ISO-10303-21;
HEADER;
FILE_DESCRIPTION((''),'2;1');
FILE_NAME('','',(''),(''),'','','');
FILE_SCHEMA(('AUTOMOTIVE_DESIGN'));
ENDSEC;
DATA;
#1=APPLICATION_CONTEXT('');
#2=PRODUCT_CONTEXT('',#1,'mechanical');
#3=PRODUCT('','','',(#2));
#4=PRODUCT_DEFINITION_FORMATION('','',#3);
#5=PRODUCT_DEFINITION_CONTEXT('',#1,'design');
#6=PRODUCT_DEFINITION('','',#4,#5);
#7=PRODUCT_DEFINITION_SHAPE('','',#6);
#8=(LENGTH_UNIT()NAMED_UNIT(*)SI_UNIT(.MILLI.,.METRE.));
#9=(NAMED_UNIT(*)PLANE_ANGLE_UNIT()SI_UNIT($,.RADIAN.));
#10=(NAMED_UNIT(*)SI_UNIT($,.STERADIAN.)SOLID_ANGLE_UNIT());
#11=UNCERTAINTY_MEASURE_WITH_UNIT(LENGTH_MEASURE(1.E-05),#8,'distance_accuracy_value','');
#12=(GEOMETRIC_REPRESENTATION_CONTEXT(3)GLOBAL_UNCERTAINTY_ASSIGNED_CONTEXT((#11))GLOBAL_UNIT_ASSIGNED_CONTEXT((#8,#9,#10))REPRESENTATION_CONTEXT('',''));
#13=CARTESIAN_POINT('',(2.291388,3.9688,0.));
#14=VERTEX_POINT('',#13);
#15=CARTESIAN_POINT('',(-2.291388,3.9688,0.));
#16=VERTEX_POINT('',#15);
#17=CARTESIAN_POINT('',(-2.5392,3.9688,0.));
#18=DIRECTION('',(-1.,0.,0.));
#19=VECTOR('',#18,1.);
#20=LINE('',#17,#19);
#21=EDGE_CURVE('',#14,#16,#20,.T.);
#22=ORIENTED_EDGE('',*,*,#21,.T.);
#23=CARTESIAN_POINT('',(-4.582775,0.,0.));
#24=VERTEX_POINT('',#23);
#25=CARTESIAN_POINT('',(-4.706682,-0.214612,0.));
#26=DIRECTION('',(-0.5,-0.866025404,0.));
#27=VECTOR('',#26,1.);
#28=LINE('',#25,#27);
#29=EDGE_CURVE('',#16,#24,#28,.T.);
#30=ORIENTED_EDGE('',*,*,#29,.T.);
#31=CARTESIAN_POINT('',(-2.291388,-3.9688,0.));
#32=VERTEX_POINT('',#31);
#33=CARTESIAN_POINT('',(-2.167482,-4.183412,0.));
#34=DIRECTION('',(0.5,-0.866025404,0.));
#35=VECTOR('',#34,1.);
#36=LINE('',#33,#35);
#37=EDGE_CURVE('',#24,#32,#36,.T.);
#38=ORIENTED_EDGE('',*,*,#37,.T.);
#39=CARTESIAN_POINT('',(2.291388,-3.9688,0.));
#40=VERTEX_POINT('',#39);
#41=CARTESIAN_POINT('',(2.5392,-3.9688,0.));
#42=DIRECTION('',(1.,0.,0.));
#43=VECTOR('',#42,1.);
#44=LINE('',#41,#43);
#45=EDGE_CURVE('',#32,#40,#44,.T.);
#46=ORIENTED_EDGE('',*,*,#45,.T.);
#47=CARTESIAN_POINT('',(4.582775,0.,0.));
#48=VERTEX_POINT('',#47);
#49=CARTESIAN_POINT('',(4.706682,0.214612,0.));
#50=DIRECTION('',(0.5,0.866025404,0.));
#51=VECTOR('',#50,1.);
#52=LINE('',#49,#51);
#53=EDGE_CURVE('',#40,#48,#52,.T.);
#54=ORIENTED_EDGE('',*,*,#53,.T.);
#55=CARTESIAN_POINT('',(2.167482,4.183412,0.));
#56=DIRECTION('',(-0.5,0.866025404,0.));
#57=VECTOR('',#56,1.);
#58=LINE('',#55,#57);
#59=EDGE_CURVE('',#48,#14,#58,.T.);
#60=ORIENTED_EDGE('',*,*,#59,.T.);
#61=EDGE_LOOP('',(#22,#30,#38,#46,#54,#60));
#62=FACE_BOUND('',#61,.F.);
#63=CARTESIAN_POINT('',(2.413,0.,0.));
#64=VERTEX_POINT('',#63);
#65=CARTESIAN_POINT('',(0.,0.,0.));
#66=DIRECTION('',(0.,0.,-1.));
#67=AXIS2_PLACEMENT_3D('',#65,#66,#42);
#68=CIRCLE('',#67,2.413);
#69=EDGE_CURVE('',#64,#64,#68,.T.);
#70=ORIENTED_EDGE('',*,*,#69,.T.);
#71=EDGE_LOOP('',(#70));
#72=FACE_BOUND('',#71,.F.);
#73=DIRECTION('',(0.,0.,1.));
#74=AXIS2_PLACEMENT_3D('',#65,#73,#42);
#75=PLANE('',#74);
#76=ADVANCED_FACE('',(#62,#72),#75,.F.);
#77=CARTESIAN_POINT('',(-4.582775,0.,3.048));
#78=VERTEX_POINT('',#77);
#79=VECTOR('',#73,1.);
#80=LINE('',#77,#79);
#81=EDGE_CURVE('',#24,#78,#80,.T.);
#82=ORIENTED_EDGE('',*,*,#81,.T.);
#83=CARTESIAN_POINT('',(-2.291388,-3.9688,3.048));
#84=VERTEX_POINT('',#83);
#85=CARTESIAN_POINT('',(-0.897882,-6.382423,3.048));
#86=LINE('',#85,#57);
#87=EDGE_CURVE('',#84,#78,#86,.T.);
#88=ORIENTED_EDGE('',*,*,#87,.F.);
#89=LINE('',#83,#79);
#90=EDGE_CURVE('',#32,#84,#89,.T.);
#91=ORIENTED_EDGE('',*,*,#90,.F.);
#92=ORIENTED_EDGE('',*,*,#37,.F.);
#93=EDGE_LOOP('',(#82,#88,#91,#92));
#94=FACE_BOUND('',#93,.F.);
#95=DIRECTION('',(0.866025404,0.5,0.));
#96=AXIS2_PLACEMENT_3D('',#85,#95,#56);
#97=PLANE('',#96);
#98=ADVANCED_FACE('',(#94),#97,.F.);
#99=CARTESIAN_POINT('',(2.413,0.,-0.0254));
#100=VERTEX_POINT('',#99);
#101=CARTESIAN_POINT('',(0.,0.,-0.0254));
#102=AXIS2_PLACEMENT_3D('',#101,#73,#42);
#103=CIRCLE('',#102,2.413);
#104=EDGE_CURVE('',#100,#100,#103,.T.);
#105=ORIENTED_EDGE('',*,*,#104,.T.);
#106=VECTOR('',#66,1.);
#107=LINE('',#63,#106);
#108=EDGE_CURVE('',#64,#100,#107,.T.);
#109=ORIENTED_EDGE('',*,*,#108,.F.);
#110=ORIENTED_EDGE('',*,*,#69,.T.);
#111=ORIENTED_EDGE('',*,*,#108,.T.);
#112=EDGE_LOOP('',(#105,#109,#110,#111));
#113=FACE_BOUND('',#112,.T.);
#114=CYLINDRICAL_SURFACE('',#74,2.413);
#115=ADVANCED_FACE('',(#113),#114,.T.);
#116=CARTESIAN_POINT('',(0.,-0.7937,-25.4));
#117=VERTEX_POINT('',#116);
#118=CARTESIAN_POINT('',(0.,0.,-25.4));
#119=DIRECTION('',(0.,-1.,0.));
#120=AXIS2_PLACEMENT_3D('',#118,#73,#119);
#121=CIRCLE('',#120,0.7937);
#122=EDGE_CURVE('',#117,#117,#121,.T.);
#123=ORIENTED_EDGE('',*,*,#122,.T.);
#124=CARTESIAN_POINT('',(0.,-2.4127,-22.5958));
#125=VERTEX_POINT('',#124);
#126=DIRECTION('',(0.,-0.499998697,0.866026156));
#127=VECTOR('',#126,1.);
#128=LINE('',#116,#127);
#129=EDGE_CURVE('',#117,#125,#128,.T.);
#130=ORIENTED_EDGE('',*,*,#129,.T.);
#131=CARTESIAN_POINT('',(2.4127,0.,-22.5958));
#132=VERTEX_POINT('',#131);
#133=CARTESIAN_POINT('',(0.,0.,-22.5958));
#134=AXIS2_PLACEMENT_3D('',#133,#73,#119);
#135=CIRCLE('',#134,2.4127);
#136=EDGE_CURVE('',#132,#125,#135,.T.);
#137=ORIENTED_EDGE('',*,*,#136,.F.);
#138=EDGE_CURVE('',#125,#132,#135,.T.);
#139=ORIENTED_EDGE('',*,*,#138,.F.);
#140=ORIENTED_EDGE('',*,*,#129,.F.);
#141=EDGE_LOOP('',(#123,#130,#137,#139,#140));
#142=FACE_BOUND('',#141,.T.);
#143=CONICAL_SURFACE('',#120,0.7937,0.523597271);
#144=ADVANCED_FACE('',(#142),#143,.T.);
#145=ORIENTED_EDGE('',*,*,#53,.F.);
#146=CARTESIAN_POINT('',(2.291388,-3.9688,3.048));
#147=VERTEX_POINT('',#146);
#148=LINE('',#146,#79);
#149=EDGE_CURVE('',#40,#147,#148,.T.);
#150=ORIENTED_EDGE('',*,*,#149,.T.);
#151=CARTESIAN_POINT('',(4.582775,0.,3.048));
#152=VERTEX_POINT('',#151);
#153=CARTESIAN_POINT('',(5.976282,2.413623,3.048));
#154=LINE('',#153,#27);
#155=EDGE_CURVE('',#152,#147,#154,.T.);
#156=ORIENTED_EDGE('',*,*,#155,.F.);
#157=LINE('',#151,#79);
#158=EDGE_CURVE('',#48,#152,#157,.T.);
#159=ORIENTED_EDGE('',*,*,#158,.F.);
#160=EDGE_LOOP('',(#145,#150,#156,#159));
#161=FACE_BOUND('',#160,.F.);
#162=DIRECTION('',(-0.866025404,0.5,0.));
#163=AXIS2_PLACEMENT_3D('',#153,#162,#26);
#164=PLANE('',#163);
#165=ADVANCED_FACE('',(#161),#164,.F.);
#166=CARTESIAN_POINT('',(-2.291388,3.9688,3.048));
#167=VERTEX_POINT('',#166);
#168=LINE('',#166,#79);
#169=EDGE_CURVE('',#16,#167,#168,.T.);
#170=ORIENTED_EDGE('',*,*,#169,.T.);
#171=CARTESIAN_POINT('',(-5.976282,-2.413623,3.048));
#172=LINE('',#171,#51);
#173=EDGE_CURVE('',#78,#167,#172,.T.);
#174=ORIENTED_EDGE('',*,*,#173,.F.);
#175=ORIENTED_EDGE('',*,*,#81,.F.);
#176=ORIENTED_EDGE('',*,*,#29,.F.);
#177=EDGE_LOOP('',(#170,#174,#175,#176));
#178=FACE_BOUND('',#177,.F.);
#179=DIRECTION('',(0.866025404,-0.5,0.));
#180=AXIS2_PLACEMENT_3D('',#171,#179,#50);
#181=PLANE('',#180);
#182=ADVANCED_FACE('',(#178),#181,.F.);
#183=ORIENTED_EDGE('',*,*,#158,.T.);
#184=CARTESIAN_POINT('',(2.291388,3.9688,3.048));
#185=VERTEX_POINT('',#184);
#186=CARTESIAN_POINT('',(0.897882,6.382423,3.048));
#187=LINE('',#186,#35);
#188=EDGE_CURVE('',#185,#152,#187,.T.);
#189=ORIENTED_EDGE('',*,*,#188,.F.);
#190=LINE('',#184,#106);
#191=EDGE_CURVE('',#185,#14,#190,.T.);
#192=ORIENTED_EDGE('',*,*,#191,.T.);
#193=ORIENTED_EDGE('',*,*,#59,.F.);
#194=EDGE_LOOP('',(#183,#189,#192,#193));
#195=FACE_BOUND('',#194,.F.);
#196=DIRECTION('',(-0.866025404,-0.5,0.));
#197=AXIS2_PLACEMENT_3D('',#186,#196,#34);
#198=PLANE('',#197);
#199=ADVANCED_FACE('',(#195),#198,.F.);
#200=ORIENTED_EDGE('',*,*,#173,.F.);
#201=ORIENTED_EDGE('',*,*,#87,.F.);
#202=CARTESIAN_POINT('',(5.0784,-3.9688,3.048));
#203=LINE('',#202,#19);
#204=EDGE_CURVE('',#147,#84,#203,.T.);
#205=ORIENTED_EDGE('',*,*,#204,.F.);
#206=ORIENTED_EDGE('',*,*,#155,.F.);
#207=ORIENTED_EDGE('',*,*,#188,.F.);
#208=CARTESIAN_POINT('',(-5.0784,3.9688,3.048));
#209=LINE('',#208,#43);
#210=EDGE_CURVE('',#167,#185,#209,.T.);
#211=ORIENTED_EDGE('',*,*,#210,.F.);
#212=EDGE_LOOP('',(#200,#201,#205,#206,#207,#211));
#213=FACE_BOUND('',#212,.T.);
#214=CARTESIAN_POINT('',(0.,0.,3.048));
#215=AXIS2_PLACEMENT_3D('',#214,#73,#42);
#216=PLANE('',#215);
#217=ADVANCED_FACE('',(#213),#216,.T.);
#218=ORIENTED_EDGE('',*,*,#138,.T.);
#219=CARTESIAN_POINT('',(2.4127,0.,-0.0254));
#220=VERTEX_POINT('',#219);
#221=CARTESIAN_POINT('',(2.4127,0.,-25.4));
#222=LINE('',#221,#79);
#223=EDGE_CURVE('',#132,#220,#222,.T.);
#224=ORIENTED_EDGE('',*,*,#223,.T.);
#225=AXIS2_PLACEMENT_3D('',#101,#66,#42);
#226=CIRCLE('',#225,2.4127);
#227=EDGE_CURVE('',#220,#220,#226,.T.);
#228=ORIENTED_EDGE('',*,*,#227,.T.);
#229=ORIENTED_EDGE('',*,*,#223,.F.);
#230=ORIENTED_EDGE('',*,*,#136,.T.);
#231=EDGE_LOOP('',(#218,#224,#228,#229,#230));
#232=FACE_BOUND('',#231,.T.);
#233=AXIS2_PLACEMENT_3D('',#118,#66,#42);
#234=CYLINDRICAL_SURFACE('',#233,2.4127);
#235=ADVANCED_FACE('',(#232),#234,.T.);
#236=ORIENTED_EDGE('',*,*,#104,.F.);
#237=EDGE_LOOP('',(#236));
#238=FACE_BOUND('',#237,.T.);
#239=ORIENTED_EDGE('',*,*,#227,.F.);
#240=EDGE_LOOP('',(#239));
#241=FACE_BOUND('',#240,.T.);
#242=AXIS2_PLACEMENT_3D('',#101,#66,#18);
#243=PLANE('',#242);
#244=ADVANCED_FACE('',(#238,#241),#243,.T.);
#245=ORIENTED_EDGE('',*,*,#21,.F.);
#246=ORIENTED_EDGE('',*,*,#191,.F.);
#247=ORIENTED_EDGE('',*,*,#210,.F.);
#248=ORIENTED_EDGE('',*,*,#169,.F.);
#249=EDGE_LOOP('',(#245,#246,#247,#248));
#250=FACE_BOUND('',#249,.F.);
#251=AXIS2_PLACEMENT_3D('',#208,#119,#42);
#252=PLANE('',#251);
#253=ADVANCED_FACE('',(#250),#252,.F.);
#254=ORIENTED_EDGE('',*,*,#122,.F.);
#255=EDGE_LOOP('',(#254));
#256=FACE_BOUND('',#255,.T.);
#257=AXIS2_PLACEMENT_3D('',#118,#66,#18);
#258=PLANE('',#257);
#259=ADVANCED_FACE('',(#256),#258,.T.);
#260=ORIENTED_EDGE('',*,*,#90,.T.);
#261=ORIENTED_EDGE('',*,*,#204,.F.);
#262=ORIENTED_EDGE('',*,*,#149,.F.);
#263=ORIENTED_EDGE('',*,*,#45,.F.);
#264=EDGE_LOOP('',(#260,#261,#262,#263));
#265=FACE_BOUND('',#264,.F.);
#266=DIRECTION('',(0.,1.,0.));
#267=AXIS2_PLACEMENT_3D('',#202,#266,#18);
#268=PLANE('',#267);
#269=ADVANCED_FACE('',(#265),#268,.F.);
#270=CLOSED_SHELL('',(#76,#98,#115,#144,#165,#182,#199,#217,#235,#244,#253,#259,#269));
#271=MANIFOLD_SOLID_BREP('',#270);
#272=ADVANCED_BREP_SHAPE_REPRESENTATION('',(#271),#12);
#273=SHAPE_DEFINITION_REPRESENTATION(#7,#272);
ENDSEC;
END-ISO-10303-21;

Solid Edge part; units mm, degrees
sketch "Sketch1" plane through (0, 0, 0) normal (0, 0, 1) x (1, 0, 0)
  circle A0 centre (0, 0) radius 6.4452
  dimension "D1" = 12.8905
extrude "Protrusion1" add sketch "Sketch1" along normal blind 3.048
sketch "Sketch2" plane through (0, 0, 0) normal (0, 0, -1) x (1, 0, 0)
  circle A0 centre (0, 0) radius 2.413
extrude "Protrusion2" add sketch "Sketch2" along normal blind 25.4
sketch "Sketch3" plane through (0, 0, -25.4) normal (0, 0, -1) x (1, 0, 0)
  circle A0 centre (0, 0) radius 2.4127
extrude "Cutout1" cut sketch "Sketch3" against normal blind 25.3746 flip side to cut
sketch "Sketch4" plane through (0, 0, 3.048) normal (0, 0, 1) x (1, 0, 0)
  line L0 (-5.0784, 3.9688) -> (5.0784, 3.9688)
  dimension "D1" = 7.9375
extrude "Cutout2" cut sketch "Sketch4" against normal up to next material side at (0, 4.0188, 3.048)
sketch "Sketch5" plane through (0, 0, 0) normal (1, 0, 0) x (0, 1, 0)
  line L0 (-0.7937, -25.4) -> (-2.4127, -22.5958)
  dimension "D1" = 0.7937
revolve "RevolvedCutout1" cut sketch "Sketch5" angle 360 about axis through (0, 0, -14.7796) along (0, 0, 1) material side at (0, -1.6465, -24.0229)
pattern_circular "Pattern1" count 6 over 360 about axis through (0, 0, 3.048) along (0, 0, 1) of "Cutout2"
properties part number "24100703"
